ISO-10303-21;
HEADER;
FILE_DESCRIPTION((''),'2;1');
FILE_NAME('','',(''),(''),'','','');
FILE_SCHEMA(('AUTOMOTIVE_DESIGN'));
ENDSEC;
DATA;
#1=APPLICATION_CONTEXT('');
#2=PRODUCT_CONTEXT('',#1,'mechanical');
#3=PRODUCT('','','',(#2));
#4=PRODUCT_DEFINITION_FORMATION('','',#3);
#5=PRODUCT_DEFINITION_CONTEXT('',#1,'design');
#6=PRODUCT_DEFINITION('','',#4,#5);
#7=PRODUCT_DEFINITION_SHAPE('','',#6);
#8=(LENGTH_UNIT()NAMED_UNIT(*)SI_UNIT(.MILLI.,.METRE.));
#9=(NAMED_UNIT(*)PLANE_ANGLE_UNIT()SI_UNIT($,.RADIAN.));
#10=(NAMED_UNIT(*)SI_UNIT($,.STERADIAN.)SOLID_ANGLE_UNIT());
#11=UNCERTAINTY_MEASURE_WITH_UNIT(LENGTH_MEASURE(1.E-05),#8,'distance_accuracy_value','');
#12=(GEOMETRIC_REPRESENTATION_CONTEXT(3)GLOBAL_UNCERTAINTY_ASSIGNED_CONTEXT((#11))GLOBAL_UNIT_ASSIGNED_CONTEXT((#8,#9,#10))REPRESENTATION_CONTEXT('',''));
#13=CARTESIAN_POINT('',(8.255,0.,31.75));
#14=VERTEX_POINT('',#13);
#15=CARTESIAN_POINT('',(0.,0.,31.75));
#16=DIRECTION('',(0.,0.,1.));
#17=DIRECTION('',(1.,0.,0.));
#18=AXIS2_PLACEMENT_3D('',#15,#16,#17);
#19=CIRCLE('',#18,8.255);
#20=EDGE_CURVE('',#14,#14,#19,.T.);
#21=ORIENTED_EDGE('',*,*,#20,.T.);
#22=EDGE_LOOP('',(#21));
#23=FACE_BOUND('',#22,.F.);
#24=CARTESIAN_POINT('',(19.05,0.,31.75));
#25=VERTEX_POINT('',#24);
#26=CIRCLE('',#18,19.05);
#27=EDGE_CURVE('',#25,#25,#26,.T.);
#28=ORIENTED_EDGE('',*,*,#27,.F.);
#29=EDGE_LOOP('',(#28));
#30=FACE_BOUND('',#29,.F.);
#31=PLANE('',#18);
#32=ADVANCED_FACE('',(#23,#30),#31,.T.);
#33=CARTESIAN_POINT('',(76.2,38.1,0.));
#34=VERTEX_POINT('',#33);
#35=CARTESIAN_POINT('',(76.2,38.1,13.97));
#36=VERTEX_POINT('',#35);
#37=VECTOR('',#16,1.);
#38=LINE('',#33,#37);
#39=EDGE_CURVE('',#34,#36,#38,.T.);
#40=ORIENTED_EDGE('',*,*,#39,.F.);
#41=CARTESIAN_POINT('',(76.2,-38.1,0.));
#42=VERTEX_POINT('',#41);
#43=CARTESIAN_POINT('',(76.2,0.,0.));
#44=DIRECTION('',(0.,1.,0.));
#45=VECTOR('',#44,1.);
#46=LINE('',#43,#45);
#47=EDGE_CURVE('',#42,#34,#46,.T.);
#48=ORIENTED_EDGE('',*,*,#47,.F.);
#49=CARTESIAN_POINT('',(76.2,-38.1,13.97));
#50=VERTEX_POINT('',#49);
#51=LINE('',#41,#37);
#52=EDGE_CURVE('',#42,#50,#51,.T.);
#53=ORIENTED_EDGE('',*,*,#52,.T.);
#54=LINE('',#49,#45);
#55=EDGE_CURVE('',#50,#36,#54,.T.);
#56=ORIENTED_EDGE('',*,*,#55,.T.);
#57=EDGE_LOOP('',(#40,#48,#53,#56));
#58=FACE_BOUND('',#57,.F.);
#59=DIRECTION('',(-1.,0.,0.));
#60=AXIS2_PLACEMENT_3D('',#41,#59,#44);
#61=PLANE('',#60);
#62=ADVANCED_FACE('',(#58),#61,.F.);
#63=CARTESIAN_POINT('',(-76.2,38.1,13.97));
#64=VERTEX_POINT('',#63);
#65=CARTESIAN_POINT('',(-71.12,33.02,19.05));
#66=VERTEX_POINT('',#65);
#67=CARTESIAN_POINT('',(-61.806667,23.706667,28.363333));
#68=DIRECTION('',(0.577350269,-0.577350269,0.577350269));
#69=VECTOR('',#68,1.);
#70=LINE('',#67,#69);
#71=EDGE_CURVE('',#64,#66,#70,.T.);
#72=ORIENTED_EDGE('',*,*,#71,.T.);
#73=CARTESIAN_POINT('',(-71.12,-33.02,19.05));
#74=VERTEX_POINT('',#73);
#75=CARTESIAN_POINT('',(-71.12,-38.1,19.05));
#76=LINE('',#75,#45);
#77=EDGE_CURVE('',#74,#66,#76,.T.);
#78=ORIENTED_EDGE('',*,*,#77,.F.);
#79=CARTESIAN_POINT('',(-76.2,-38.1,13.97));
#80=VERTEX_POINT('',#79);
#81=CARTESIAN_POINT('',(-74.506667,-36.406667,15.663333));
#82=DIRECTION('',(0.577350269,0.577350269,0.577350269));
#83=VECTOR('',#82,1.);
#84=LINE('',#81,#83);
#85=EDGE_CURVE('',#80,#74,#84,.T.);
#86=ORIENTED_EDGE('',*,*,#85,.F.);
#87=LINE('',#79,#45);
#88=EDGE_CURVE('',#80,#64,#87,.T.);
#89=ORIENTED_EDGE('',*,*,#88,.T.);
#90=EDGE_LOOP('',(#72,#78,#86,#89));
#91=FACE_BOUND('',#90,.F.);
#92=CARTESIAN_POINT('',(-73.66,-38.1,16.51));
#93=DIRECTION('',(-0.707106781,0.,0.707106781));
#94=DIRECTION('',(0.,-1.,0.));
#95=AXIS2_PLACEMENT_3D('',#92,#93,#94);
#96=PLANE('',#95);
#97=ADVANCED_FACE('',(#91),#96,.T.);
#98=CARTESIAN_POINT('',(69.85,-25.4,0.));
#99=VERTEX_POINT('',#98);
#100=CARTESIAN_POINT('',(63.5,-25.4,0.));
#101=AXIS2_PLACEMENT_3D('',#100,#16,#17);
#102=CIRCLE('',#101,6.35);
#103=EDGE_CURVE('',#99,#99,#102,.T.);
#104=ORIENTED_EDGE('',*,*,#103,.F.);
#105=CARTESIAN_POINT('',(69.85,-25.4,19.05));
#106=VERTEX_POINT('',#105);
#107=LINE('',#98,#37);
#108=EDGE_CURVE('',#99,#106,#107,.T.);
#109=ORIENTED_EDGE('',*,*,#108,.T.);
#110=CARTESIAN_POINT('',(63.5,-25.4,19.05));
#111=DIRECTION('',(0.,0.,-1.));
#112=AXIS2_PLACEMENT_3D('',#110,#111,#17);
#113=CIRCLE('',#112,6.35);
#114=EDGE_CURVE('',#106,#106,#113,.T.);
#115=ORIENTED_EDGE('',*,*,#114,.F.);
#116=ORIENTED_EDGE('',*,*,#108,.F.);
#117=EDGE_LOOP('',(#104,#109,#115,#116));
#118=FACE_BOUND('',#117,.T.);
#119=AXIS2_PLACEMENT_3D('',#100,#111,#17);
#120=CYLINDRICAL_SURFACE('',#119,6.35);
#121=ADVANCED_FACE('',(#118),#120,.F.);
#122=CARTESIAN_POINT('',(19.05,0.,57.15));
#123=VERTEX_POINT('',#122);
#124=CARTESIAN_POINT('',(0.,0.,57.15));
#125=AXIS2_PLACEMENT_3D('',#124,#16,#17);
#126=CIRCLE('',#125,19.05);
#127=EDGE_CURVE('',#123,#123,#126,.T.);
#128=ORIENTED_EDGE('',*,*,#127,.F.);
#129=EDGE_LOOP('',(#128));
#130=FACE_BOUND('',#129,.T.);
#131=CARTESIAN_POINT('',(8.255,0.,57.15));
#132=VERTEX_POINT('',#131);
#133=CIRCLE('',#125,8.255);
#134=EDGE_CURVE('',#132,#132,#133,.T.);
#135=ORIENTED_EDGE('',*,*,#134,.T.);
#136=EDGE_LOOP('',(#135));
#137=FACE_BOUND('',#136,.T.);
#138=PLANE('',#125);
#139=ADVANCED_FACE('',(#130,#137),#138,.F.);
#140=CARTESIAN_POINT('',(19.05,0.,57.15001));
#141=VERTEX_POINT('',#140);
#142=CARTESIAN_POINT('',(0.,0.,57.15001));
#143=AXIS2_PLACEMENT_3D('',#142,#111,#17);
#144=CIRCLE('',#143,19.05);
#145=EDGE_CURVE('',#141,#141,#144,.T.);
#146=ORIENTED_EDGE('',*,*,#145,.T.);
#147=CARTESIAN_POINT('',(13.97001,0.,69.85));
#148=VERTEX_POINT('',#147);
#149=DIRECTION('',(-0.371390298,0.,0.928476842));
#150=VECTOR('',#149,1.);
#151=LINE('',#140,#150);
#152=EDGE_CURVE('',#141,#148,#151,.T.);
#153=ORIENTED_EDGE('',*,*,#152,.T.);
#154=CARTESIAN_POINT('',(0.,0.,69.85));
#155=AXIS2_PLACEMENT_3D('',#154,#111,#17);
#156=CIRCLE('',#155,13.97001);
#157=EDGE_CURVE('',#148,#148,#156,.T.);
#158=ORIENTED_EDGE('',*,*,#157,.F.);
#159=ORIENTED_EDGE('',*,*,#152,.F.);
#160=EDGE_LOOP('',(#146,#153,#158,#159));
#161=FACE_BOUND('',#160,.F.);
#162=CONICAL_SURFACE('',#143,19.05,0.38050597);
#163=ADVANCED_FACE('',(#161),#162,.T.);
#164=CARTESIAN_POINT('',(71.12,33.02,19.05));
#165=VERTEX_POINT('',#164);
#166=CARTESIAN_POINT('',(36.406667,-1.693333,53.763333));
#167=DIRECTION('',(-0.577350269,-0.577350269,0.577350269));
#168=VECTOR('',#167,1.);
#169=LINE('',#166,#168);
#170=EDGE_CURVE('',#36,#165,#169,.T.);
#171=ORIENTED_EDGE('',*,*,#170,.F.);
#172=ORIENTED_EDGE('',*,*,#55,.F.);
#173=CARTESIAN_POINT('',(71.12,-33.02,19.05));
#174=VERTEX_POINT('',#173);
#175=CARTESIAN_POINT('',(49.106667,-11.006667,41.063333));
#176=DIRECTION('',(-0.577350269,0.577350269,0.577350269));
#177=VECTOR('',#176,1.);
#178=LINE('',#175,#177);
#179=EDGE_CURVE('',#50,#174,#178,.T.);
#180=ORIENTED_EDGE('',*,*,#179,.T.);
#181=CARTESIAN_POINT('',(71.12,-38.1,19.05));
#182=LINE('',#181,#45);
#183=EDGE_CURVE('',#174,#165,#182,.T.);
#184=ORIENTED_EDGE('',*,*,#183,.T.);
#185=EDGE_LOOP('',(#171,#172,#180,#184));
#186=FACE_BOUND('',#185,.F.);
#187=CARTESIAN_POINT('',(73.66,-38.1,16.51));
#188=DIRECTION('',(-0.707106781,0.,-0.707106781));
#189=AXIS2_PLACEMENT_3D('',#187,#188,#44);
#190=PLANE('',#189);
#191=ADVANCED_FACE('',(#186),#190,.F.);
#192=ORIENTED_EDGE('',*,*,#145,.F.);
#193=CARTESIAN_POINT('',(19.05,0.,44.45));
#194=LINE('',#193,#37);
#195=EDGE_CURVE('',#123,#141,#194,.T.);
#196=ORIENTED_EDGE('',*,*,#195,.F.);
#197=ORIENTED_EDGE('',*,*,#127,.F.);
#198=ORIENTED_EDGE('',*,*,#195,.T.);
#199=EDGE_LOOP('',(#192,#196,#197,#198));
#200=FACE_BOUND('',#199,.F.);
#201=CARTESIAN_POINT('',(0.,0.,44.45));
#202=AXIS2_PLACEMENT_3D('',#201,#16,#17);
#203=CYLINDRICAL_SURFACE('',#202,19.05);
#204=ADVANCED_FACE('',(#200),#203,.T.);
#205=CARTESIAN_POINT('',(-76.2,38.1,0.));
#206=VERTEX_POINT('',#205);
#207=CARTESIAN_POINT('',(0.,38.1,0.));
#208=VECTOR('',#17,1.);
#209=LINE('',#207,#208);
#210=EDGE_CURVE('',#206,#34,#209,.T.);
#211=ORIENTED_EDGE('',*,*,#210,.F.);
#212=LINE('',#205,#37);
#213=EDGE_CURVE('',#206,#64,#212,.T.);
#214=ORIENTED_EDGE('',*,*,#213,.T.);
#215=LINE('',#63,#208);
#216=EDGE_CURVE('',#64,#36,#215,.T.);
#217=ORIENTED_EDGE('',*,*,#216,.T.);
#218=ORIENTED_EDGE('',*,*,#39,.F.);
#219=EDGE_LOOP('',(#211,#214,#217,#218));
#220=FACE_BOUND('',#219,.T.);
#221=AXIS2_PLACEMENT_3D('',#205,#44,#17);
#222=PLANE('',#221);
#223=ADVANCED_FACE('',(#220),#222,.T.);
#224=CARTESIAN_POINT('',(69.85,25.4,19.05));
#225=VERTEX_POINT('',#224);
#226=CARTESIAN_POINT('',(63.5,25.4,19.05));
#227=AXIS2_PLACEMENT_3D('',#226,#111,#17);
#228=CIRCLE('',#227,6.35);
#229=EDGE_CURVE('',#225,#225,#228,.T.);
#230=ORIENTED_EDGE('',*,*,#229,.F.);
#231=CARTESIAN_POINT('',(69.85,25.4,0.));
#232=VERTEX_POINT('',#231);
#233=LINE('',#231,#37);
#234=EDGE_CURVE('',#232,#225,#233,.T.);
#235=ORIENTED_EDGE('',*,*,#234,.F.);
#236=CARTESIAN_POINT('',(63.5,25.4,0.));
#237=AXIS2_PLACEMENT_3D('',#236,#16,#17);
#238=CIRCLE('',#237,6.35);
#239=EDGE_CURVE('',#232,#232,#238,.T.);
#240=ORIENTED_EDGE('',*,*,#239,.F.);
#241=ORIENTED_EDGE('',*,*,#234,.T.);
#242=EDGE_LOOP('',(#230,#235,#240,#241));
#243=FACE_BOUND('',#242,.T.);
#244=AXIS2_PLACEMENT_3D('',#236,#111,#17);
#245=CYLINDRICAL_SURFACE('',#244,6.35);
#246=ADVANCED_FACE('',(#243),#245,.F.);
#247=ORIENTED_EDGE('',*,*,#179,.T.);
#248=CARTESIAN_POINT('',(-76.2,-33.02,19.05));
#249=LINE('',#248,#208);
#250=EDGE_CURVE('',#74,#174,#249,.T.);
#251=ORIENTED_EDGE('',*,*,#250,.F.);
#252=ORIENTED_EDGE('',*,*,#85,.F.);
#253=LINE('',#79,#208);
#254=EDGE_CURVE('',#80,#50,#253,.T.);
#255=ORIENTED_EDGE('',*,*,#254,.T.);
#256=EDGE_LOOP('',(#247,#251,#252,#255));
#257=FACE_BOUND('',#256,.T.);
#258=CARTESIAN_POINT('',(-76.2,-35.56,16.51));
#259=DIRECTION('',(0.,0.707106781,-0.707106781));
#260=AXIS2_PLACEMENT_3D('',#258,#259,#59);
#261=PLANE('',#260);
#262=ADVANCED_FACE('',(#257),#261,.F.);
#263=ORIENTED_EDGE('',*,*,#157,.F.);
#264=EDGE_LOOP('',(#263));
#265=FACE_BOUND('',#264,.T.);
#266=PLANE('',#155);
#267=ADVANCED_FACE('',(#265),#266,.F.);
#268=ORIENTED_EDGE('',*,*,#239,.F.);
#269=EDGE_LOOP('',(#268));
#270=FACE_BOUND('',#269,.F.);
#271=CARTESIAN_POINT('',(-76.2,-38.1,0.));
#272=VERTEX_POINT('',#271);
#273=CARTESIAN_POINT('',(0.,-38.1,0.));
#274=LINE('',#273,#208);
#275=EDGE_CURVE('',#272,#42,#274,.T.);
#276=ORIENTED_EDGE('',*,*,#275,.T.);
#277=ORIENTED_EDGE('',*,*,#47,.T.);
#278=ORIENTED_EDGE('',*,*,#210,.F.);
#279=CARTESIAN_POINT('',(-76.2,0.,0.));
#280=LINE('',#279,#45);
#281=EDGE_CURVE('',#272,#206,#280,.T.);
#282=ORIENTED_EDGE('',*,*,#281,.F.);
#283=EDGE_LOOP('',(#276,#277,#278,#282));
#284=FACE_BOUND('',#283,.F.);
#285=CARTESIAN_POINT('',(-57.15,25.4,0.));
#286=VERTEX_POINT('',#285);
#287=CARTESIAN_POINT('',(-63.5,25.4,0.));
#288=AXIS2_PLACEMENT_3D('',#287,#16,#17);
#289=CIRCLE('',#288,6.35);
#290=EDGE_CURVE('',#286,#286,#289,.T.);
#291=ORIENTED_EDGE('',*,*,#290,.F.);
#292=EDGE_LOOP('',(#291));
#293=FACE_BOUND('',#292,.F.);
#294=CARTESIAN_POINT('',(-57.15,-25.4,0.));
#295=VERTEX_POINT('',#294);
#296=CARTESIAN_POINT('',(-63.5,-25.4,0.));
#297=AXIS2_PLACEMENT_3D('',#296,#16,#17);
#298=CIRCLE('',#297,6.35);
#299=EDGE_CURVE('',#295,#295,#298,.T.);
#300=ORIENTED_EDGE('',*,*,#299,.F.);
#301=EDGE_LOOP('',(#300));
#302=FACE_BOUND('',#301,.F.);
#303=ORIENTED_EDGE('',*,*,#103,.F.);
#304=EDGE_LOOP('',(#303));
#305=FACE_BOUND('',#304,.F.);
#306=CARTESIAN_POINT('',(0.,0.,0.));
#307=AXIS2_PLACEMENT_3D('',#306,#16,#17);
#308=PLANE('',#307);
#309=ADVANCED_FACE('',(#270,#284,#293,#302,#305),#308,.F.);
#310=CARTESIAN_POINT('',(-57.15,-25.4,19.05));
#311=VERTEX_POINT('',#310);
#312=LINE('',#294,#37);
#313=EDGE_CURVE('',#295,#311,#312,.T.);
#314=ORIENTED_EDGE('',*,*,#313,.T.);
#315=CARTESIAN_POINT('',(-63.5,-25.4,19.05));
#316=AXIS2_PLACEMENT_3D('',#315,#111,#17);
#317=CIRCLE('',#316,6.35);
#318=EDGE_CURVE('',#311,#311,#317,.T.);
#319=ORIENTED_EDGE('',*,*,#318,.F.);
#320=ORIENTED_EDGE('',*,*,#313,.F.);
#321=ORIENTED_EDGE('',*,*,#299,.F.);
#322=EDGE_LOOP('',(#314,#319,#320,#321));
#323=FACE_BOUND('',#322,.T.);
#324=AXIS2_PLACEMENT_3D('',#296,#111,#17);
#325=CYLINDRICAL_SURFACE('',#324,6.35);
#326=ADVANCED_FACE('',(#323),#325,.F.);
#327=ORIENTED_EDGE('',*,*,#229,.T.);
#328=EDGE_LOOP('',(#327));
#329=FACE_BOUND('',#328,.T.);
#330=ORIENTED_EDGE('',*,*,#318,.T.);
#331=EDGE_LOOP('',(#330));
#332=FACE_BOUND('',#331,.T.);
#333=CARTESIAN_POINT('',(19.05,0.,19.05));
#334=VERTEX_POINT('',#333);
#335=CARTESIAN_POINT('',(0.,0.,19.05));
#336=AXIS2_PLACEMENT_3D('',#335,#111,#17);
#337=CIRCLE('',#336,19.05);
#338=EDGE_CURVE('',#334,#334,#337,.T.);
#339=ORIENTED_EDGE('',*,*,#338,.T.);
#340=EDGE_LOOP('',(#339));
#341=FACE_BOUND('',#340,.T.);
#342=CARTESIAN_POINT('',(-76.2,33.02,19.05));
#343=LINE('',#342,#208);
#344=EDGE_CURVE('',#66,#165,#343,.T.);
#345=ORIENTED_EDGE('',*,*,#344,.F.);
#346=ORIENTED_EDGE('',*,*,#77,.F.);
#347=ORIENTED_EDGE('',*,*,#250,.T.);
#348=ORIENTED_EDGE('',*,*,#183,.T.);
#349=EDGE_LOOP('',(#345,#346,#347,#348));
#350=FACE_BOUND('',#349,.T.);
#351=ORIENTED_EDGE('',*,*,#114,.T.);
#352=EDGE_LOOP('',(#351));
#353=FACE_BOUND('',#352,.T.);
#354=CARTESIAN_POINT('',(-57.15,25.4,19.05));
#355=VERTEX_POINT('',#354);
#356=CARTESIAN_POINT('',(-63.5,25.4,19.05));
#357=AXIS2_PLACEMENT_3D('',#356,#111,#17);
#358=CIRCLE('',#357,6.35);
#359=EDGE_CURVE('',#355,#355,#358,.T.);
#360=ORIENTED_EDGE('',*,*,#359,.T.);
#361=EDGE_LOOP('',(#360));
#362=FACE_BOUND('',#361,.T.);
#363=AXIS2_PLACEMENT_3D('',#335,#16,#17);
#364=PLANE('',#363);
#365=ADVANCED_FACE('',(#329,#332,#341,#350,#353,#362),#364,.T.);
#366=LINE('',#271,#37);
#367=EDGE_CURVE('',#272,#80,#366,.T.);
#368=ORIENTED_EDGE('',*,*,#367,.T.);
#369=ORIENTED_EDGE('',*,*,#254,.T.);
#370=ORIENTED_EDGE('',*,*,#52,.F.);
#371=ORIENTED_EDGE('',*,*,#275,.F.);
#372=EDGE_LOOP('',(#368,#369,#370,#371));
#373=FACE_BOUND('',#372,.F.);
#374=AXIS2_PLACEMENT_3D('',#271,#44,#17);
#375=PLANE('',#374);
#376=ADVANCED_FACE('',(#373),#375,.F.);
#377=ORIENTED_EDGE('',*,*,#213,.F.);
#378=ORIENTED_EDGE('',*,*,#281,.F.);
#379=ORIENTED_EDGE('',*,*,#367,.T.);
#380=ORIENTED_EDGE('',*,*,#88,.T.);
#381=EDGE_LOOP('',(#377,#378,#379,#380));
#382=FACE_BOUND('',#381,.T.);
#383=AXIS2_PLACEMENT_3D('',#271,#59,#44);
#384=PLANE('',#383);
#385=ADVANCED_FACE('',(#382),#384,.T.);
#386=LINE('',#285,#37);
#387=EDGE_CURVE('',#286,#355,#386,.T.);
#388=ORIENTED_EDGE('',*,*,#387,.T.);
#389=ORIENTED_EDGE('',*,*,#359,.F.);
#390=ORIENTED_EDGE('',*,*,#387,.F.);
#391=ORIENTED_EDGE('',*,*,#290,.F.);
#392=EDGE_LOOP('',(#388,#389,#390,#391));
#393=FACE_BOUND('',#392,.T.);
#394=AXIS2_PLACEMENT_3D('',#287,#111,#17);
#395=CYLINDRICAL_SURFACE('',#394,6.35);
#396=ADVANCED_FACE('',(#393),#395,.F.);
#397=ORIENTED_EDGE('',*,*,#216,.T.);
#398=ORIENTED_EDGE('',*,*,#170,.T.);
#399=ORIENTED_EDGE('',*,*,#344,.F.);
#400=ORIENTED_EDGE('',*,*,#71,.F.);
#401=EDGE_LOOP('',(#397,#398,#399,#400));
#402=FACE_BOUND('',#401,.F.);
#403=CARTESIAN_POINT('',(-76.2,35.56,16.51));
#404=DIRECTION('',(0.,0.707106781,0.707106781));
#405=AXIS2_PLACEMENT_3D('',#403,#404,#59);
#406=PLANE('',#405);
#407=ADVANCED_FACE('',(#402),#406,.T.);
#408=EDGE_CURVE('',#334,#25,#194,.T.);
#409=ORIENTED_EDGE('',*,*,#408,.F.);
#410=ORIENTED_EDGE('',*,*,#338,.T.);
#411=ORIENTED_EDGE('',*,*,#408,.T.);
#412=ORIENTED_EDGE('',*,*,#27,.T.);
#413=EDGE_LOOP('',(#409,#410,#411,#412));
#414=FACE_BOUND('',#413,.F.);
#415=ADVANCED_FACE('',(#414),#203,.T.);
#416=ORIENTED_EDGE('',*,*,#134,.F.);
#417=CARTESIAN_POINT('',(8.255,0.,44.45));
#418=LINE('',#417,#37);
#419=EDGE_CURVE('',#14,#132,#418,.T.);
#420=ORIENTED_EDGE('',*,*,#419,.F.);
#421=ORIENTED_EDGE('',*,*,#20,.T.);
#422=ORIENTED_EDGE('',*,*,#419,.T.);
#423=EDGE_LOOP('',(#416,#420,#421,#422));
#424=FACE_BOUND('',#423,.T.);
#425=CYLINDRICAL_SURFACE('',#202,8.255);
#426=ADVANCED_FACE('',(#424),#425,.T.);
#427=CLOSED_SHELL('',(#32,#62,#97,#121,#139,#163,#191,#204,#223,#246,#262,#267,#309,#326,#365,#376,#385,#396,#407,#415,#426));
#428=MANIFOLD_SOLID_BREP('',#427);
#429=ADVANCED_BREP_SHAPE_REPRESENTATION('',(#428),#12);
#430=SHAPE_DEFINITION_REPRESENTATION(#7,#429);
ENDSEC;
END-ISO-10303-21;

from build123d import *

# Parameters (mm, degrees)
F0_W     = 152.4
F0_H     = 76.2
F1_DEPTH = 19.05
F2_R     = 6.35
F3_DEPTH = 19.051
F4_W     = 19.05
F4_H     = 50.8
F6_SIZE  = 5.08
F7_W     = 10.795
F7_H     = 25.4
F9_SIZE2 = 5.07999
F9_SIZE  = 12.69999


# Not quite as in the source:
# - a fillet or chamfer is up to 0.001 mm smaller than in the source, because OpenCascade refuses the exact size


with BuildPart() as f1:
    # F0 (on Top) → F1 (new body)
    with BuildSketch(Plane.XY):
        Rectangle(F0_W, F0_H)
    extrude(amount=F1_DEPTH)

    # F2 (on Top) → F3 (cut, through all)
    with BuildSketch(Plane.XY):
        with Locations((-63.5, 25.4)):
            Circle(F2_R)
        with Locations((63.5, -25.4)):
            Circle(F2_R)
        with Locations((63.5, 25.4)):
            Circle(F2_R)
        with Locations((-63.5, -25.4)):
            Circle(F2_R)
    extrude(amount=F3_DEPTH, mode=Mode.SUBTRACT)

    # F4 (on Front) → F5 (revolve)
    with BuildSketch(Plane.XZ):
        with Locations((9.525, 44.45)):
            Rectangle(F4_W, F4_H)
    revolve(axis=Axis((0, 0, 44.45), (0, 0, -1)))

    # F6
    f6_edges = [f1.edges().sort_by_distance(p)[0] for p in [
        (0, -38.1, 19.05),
        (-76.2, 0, 19.05),
        (0, 38.1, 19.05),
        (76.2, 0, 19.05),
    ]]
    chamfer(f6_edges, length=F6_SIZE)

    # F7 (on Front) → F8 (revolve, cut)
    with BuildSketch(Plane.XZ):
        with Locations((13.6525, 44.45)):
            Rectangle(F7_W, F7_H)
    revolve(axis=Axis((0, 0, 19.05), (0, 0, 1)), mode=Mode.SUBTRACT)

    # F9 (size 12.7 and 5.08 in the source; OpenCascade refuses exactly that, so slightly less here)
    f9_edges = [f1.edges().sort_by_distance(p)[0] for p in [
        (-19.05, 0, 69.85),
    ]]
    f9_side = f1.faces().sort_by_distance((-19.05, 0, 63.5))[0]
    chamfer(f9_edges, length=F9_SIZE, length2=F9_SIZE2, reference=f9_side)


solid = f1.part
